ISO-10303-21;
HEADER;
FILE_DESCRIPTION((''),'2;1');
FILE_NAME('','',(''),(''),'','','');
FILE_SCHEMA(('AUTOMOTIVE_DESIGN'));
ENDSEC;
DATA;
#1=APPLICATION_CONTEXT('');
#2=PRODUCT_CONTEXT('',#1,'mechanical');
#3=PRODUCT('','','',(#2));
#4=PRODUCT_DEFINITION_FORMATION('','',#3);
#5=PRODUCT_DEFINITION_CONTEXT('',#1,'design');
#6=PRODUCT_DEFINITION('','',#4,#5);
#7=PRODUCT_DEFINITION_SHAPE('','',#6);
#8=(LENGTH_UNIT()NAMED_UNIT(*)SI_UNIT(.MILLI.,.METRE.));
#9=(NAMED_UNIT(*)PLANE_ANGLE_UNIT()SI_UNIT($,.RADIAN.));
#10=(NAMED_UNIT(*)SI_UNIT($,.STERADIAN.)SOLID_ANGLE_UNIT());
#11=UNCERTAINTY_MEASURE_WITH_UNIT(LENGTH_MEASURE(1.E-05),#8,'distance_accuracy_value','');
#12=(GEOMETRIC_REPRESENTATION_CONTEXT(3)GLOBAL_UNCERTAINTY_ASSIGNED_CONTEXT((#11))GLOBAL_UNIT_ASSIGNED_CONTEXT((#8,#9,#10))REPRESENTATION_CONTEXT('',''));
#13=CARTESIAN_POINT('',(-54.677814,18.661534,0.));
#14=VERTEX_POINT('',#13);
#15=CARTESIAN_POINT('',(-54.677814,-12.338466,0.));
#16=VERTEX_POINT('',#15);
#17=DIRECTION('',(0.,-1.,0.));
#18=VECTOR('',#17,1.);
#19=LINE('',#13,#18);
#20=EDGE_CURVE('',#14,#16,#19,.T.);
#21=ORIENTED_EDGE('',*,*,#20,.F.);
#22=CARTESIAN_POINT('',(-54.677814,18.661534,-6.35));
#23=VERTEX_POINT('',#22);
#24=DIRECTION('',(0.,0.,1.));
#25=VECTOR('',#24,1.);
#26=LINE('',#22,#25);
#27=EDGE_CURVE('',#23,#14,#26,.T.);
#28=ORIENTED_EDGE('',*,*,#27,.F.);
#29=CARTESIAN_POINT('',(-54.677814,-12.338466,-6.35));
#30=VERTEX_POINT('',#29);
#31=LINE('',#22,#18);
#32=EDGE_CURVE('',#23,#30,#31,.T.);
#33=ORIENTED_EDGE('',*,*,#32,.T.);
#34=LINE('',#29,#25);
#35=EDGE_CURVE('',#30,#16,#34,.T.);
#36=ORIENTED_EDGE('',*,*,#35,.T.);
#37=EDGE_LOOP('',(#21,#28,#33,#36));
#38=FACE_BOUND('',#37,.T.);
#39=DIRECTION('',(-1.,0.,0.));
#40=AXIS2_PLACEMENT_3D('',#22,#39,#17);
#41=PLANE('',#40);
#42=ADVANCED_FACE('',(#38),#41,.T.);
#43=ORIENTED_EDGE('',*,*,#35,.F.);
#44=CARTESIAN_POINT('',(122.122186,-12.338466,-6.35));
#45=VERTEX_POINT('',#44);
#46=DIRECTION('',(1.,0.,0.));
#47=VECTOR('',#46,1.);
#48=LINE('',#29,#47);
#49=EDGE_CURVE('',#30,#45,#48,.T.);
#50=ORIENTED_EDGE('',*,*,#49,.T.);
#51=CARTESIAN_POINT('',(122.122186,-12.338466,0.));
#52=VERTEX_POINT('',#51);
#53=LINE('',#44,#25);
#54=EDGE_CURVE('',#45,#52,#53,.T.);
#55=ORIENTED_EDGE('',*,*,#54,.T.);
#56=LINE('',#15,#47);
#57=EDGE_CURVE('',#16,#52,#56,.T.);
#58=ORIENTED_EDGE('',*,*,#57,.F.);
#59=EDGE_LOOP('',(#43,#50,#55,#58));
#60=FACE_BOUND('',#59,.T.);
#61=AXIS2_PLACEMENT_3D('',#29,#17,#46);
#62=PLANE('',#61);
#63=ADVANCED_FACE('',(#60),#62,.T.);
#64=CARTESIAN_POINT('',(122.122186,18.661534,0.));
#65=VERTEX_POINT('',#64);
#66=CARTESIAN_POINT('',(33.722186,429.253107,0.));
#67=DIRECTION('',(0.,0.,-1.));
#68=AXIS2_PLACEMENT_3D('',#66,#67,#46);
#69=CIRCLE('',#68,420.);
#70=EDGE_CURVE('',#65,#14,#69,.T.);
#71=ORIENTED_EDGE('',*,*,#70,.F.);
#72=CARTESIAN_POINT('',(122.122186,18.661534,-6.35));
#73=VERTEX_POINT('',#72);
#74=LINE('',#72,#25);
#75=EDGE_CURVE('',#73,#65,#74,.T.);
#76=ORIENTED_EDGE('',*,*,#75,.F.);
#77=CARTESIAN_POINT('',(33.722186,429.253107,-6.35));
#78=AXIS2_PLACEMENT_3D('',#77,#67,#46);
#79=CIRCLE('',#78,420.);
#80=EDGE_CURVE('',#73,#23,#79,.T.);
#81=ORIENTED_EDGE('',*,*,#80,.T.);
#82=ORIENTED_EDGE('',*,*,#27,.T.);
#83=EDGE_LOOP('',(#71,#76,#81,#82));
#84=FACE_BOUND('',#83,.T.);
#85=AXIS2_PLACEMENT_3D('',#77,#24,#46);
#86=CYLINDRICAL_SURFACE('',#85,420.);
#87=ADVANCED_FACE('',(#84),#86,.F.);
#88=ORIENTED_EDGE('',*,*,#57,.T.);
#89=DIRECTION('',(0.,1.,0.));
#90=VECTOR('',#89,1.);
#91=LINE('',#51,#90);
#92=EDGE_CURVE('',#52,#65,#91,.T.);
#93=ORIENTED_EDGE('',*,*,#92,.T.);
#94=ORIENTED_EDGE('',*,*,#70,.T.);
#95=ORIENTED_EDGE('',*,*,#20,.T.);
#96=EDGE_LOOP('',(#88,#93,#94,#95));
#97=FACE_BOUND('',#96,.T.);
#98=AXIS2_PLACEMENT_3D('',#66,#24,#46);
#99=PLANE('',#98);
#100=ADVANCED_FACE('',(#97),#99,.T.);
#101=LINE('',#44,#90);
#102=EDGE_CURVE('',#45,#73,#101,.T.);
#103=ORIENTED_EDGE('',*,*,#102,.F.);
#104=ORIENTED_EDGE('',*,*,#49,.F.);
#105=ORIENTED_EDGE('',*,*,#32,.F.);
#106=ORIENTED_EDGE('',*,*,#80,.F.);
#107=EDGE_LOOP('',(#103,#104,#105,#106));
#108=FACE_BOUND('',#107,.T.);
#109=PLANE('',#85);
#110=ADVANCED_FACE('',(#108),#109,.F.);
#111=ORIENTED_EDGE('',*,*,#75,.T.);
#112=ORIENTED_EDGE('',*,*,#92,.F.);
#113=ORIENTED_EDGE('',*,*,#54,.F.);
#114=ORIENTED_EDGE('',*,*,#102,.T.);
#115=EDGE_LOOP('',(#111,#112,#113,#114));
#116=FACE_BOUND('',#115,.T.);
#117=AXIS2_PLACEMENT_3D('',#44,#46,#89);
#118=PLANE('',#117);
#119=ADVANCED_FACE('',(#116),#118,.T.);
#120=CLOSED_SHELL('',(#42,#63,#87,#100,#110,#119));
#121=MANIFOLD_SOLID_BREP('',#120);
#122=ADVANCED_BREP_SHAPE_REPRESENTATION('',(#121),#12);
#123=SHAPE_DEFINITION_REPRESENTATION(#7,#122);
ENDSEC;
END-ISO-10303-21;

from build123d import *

# Parameters (mm, degrees)
BRIDA_BASE1_DEPTH = 6.35


# Sheet-metal steps are written as plain solids
with BuildPart() as part:
    # Croquis1 → Brida base1 (new body)
    with BuildSketch(Plane.XY):
        with BuildLine():
            Line((-54.677814402, 18.66153404), (-54.677814402, -12.33846596))
            Line((-54.677814402, -12.33846596), (122.122185598, -12.33846596))
            Line((122.122185598, -12.33846596), (122.122185598, 18.66153404))
            ThreePointArc((122.122185598, 18.66153404), (33.722185598, 9.253107261), (-54.677814402, 18.66153404))
        make_face()
    extrude(amount=-BRIDA_BASE1_DEPTH)


solid = part.part
